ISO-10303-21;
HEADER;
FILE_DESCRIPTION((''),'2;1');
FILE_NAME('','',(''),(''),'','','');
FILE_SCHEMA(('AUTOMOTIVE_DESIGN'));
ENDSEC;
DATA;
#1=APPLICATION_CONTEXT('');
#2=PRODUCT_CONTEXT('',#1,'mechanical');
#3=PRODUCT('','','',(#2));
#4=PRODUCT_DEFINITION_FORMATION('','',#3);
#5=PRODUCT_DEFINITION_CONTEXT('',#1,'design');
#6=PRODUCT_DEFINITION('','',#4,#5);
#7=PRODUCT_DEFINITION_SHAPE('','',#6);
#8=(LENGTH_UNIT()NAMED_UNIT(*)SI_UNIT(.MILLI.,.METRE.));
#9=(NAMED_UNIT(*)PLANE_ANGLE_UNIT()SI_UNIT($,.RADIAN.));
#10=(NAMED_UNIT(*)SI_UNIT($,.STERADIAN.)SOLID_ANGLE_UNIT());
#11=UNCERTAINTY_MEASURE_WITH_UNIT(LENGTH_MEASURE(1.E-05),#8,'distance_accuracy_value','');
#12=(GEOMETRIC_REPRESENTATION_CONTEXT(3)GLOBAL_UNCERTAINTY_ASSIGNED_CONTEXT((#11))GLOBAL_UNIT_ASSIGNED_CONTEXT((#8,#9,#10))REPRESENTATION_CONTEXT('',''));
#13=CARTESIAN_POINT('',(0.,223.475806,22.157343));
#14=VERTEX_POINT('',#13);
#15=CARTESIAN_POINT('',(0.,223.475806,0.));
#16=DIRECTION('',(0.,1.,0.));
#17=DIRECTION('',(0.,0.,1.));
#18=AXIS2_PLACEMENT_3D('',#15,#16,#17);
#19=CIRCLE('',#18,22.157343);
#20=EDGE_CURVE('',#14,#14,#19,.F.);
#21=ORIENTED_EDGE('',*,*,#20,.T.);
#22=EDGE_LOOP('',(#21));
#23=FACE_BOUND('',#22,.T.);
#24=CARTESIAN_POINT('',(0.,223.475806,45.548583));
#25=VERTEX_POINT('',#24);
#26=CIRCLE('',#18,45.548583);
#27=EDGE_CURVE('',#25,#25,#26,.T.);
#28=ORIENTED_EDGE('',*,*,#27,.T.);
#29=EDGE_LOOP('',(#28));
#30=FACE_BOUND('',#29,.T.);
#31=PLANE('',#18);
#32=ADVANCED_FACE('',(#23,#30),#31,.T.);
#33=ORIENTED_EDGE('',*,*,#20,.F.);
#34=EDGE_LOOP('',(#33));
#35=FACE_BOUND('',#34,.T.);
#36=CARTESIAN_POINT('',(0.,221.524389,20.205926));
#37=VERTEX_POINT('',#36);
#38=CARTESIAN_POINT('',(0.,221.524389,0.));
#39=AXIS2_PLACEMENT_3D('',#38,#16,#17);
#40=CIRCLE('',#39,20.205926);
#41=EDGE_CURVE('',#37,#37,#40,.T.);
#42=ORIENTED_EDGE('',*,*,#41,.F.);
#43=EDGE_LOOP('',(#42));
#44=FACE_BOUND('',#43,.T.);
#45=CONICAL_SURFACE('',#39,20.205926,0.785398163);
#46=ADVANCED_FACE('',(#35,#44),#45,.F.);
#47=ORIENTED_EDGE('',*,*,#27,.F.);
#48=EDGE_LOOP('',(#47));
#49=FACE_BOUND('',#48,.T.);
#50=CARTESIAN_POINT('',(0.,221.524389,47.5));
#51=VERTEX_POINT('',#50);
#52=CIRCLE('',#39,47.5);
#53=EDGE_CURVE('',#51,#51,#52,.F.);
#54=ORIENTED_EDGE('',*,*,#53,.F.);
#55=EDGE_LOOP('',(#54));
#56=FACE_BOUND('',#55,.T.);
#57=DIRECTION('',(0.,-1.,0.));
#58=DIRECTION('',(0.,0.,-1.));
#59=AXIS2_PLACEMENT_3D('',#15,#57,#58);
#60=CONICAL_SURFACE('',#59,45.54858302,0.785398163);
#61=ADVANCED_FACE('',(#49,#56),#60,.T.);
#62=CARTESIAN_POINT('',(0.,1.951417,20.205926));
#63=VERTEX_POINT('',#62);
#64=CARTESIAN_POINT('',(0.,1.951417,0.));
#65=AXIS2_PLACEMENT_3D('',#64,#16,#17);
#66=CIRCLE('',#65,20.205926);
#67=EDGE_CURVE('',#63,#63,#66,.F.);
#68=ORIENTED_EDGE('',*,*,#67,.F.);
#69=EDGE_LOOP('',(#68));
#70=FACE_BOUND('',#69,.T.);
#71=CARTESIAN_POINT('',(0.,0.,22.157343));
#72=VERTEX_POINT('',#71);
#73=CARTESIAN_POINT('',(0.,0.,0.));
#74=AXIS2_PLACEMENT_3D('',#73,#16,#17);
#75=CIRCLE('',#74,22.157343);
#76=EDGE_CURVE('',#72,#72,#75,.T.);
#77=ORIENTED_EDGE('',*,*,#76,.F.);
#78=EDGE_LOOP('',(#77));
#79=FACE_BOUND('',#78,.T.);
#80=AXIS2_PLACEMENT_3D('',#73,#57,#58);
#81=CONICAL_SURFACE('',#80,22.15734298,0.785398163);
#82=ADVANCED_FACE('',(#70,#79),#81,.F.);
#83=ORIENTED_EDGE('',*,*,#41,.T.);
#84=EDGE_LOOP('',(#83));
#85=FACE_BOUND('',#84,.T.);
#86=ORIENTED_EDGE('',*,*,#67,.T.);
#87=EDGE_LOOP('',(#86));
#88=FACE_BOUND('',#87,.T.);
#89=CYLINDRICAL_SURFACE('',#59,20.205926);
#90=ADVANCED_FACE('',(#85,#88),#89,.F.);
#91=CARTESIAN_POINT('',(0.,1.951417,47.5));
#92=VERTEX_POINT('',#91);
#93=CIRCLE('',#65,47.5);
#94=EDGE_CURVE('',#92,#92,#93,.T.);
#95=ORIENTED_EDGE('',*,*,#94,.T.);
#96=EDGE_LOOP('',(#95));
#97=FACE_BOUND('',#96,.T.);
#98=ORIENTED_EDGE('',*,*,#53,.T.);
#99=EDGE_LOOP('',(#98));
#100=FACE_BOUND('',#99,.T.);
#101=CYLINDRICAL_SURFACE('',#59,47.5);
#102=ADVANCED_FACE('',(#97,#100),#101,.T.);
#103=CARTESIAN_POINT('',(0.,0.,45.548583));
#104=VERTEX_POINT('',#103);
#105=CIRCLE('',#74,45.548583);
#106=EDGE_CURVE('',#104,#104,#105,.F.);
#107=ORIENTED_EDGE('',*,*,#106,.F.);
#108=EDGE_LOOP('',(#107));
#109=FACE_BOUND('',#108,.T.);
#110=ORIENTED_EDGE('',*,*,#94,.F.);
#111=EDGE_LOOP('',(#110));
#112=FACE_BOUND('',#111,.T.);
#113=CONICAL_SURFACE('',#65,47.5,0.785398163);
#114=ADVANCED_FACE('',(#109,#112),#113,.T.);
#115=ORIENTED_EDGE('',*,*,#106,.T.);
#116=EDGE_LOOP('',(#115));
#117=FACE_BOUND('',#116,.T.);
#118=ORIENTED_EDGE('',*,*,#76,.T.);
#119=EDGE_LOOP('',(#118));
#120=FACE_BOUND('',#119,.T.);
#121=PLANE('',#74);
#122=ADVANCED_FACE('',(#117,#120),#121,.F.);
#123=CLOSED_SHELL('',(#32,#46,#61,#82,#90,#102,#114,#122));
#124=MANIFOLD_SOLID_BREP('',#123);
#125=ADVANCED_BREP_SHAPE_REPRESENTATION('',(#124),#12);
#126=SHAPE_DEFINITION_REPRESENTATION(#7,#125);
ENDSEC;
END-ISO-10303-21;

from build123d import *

# Parameters (mm, degrees)
SKETCH1_R           = 47.5
BOSS_EXTRUDE1_DEPTH = 223.475805961
SKETCH2_R           = 20.205926
CUT_EXTRUDE1_DEPTH  = 234.353671173
CHAMFER1_SIZE       = 1.95141698


with BuildPart() as part:
    # Sketch1 → Boss-Extrude1 (new body)
    with BuildSketch(Plane(origin=(0, 0, 0), x_dir=(1, 0, 0), z_dir=(0, 1, 0))):
        Circle(SKETCH1_R)
    extrude(amount=BOSS_EXTRUDE1_DEPTH)

    # Sketch2 → Cut-Extrude1 (cut, through all)
    with BuildSketch(Plane(origin=(0, 0, 0), x_dir=(1, 0, 0), z_dir=(0, 1, 0))):
        Circle(SKETCH2_R)
    extrude(amount=CUT_EXTRUDE1_DEPTH, mode=Mode.SUBTRACT)

    # Chamfer1
    chamfer1_edges = [part.edges().sort_by_distance(p)[0] for p in [
        (-20.205926, 223.475805961, 0),
        (-20.205926, 0, 0),
        (-47.5, 0, 0),
        (-47.5, 223.475805961, 0),
    ]]
    chamfer(chamfer1_edges, length=CHAMFER1_SIZE)


solid = part.part
